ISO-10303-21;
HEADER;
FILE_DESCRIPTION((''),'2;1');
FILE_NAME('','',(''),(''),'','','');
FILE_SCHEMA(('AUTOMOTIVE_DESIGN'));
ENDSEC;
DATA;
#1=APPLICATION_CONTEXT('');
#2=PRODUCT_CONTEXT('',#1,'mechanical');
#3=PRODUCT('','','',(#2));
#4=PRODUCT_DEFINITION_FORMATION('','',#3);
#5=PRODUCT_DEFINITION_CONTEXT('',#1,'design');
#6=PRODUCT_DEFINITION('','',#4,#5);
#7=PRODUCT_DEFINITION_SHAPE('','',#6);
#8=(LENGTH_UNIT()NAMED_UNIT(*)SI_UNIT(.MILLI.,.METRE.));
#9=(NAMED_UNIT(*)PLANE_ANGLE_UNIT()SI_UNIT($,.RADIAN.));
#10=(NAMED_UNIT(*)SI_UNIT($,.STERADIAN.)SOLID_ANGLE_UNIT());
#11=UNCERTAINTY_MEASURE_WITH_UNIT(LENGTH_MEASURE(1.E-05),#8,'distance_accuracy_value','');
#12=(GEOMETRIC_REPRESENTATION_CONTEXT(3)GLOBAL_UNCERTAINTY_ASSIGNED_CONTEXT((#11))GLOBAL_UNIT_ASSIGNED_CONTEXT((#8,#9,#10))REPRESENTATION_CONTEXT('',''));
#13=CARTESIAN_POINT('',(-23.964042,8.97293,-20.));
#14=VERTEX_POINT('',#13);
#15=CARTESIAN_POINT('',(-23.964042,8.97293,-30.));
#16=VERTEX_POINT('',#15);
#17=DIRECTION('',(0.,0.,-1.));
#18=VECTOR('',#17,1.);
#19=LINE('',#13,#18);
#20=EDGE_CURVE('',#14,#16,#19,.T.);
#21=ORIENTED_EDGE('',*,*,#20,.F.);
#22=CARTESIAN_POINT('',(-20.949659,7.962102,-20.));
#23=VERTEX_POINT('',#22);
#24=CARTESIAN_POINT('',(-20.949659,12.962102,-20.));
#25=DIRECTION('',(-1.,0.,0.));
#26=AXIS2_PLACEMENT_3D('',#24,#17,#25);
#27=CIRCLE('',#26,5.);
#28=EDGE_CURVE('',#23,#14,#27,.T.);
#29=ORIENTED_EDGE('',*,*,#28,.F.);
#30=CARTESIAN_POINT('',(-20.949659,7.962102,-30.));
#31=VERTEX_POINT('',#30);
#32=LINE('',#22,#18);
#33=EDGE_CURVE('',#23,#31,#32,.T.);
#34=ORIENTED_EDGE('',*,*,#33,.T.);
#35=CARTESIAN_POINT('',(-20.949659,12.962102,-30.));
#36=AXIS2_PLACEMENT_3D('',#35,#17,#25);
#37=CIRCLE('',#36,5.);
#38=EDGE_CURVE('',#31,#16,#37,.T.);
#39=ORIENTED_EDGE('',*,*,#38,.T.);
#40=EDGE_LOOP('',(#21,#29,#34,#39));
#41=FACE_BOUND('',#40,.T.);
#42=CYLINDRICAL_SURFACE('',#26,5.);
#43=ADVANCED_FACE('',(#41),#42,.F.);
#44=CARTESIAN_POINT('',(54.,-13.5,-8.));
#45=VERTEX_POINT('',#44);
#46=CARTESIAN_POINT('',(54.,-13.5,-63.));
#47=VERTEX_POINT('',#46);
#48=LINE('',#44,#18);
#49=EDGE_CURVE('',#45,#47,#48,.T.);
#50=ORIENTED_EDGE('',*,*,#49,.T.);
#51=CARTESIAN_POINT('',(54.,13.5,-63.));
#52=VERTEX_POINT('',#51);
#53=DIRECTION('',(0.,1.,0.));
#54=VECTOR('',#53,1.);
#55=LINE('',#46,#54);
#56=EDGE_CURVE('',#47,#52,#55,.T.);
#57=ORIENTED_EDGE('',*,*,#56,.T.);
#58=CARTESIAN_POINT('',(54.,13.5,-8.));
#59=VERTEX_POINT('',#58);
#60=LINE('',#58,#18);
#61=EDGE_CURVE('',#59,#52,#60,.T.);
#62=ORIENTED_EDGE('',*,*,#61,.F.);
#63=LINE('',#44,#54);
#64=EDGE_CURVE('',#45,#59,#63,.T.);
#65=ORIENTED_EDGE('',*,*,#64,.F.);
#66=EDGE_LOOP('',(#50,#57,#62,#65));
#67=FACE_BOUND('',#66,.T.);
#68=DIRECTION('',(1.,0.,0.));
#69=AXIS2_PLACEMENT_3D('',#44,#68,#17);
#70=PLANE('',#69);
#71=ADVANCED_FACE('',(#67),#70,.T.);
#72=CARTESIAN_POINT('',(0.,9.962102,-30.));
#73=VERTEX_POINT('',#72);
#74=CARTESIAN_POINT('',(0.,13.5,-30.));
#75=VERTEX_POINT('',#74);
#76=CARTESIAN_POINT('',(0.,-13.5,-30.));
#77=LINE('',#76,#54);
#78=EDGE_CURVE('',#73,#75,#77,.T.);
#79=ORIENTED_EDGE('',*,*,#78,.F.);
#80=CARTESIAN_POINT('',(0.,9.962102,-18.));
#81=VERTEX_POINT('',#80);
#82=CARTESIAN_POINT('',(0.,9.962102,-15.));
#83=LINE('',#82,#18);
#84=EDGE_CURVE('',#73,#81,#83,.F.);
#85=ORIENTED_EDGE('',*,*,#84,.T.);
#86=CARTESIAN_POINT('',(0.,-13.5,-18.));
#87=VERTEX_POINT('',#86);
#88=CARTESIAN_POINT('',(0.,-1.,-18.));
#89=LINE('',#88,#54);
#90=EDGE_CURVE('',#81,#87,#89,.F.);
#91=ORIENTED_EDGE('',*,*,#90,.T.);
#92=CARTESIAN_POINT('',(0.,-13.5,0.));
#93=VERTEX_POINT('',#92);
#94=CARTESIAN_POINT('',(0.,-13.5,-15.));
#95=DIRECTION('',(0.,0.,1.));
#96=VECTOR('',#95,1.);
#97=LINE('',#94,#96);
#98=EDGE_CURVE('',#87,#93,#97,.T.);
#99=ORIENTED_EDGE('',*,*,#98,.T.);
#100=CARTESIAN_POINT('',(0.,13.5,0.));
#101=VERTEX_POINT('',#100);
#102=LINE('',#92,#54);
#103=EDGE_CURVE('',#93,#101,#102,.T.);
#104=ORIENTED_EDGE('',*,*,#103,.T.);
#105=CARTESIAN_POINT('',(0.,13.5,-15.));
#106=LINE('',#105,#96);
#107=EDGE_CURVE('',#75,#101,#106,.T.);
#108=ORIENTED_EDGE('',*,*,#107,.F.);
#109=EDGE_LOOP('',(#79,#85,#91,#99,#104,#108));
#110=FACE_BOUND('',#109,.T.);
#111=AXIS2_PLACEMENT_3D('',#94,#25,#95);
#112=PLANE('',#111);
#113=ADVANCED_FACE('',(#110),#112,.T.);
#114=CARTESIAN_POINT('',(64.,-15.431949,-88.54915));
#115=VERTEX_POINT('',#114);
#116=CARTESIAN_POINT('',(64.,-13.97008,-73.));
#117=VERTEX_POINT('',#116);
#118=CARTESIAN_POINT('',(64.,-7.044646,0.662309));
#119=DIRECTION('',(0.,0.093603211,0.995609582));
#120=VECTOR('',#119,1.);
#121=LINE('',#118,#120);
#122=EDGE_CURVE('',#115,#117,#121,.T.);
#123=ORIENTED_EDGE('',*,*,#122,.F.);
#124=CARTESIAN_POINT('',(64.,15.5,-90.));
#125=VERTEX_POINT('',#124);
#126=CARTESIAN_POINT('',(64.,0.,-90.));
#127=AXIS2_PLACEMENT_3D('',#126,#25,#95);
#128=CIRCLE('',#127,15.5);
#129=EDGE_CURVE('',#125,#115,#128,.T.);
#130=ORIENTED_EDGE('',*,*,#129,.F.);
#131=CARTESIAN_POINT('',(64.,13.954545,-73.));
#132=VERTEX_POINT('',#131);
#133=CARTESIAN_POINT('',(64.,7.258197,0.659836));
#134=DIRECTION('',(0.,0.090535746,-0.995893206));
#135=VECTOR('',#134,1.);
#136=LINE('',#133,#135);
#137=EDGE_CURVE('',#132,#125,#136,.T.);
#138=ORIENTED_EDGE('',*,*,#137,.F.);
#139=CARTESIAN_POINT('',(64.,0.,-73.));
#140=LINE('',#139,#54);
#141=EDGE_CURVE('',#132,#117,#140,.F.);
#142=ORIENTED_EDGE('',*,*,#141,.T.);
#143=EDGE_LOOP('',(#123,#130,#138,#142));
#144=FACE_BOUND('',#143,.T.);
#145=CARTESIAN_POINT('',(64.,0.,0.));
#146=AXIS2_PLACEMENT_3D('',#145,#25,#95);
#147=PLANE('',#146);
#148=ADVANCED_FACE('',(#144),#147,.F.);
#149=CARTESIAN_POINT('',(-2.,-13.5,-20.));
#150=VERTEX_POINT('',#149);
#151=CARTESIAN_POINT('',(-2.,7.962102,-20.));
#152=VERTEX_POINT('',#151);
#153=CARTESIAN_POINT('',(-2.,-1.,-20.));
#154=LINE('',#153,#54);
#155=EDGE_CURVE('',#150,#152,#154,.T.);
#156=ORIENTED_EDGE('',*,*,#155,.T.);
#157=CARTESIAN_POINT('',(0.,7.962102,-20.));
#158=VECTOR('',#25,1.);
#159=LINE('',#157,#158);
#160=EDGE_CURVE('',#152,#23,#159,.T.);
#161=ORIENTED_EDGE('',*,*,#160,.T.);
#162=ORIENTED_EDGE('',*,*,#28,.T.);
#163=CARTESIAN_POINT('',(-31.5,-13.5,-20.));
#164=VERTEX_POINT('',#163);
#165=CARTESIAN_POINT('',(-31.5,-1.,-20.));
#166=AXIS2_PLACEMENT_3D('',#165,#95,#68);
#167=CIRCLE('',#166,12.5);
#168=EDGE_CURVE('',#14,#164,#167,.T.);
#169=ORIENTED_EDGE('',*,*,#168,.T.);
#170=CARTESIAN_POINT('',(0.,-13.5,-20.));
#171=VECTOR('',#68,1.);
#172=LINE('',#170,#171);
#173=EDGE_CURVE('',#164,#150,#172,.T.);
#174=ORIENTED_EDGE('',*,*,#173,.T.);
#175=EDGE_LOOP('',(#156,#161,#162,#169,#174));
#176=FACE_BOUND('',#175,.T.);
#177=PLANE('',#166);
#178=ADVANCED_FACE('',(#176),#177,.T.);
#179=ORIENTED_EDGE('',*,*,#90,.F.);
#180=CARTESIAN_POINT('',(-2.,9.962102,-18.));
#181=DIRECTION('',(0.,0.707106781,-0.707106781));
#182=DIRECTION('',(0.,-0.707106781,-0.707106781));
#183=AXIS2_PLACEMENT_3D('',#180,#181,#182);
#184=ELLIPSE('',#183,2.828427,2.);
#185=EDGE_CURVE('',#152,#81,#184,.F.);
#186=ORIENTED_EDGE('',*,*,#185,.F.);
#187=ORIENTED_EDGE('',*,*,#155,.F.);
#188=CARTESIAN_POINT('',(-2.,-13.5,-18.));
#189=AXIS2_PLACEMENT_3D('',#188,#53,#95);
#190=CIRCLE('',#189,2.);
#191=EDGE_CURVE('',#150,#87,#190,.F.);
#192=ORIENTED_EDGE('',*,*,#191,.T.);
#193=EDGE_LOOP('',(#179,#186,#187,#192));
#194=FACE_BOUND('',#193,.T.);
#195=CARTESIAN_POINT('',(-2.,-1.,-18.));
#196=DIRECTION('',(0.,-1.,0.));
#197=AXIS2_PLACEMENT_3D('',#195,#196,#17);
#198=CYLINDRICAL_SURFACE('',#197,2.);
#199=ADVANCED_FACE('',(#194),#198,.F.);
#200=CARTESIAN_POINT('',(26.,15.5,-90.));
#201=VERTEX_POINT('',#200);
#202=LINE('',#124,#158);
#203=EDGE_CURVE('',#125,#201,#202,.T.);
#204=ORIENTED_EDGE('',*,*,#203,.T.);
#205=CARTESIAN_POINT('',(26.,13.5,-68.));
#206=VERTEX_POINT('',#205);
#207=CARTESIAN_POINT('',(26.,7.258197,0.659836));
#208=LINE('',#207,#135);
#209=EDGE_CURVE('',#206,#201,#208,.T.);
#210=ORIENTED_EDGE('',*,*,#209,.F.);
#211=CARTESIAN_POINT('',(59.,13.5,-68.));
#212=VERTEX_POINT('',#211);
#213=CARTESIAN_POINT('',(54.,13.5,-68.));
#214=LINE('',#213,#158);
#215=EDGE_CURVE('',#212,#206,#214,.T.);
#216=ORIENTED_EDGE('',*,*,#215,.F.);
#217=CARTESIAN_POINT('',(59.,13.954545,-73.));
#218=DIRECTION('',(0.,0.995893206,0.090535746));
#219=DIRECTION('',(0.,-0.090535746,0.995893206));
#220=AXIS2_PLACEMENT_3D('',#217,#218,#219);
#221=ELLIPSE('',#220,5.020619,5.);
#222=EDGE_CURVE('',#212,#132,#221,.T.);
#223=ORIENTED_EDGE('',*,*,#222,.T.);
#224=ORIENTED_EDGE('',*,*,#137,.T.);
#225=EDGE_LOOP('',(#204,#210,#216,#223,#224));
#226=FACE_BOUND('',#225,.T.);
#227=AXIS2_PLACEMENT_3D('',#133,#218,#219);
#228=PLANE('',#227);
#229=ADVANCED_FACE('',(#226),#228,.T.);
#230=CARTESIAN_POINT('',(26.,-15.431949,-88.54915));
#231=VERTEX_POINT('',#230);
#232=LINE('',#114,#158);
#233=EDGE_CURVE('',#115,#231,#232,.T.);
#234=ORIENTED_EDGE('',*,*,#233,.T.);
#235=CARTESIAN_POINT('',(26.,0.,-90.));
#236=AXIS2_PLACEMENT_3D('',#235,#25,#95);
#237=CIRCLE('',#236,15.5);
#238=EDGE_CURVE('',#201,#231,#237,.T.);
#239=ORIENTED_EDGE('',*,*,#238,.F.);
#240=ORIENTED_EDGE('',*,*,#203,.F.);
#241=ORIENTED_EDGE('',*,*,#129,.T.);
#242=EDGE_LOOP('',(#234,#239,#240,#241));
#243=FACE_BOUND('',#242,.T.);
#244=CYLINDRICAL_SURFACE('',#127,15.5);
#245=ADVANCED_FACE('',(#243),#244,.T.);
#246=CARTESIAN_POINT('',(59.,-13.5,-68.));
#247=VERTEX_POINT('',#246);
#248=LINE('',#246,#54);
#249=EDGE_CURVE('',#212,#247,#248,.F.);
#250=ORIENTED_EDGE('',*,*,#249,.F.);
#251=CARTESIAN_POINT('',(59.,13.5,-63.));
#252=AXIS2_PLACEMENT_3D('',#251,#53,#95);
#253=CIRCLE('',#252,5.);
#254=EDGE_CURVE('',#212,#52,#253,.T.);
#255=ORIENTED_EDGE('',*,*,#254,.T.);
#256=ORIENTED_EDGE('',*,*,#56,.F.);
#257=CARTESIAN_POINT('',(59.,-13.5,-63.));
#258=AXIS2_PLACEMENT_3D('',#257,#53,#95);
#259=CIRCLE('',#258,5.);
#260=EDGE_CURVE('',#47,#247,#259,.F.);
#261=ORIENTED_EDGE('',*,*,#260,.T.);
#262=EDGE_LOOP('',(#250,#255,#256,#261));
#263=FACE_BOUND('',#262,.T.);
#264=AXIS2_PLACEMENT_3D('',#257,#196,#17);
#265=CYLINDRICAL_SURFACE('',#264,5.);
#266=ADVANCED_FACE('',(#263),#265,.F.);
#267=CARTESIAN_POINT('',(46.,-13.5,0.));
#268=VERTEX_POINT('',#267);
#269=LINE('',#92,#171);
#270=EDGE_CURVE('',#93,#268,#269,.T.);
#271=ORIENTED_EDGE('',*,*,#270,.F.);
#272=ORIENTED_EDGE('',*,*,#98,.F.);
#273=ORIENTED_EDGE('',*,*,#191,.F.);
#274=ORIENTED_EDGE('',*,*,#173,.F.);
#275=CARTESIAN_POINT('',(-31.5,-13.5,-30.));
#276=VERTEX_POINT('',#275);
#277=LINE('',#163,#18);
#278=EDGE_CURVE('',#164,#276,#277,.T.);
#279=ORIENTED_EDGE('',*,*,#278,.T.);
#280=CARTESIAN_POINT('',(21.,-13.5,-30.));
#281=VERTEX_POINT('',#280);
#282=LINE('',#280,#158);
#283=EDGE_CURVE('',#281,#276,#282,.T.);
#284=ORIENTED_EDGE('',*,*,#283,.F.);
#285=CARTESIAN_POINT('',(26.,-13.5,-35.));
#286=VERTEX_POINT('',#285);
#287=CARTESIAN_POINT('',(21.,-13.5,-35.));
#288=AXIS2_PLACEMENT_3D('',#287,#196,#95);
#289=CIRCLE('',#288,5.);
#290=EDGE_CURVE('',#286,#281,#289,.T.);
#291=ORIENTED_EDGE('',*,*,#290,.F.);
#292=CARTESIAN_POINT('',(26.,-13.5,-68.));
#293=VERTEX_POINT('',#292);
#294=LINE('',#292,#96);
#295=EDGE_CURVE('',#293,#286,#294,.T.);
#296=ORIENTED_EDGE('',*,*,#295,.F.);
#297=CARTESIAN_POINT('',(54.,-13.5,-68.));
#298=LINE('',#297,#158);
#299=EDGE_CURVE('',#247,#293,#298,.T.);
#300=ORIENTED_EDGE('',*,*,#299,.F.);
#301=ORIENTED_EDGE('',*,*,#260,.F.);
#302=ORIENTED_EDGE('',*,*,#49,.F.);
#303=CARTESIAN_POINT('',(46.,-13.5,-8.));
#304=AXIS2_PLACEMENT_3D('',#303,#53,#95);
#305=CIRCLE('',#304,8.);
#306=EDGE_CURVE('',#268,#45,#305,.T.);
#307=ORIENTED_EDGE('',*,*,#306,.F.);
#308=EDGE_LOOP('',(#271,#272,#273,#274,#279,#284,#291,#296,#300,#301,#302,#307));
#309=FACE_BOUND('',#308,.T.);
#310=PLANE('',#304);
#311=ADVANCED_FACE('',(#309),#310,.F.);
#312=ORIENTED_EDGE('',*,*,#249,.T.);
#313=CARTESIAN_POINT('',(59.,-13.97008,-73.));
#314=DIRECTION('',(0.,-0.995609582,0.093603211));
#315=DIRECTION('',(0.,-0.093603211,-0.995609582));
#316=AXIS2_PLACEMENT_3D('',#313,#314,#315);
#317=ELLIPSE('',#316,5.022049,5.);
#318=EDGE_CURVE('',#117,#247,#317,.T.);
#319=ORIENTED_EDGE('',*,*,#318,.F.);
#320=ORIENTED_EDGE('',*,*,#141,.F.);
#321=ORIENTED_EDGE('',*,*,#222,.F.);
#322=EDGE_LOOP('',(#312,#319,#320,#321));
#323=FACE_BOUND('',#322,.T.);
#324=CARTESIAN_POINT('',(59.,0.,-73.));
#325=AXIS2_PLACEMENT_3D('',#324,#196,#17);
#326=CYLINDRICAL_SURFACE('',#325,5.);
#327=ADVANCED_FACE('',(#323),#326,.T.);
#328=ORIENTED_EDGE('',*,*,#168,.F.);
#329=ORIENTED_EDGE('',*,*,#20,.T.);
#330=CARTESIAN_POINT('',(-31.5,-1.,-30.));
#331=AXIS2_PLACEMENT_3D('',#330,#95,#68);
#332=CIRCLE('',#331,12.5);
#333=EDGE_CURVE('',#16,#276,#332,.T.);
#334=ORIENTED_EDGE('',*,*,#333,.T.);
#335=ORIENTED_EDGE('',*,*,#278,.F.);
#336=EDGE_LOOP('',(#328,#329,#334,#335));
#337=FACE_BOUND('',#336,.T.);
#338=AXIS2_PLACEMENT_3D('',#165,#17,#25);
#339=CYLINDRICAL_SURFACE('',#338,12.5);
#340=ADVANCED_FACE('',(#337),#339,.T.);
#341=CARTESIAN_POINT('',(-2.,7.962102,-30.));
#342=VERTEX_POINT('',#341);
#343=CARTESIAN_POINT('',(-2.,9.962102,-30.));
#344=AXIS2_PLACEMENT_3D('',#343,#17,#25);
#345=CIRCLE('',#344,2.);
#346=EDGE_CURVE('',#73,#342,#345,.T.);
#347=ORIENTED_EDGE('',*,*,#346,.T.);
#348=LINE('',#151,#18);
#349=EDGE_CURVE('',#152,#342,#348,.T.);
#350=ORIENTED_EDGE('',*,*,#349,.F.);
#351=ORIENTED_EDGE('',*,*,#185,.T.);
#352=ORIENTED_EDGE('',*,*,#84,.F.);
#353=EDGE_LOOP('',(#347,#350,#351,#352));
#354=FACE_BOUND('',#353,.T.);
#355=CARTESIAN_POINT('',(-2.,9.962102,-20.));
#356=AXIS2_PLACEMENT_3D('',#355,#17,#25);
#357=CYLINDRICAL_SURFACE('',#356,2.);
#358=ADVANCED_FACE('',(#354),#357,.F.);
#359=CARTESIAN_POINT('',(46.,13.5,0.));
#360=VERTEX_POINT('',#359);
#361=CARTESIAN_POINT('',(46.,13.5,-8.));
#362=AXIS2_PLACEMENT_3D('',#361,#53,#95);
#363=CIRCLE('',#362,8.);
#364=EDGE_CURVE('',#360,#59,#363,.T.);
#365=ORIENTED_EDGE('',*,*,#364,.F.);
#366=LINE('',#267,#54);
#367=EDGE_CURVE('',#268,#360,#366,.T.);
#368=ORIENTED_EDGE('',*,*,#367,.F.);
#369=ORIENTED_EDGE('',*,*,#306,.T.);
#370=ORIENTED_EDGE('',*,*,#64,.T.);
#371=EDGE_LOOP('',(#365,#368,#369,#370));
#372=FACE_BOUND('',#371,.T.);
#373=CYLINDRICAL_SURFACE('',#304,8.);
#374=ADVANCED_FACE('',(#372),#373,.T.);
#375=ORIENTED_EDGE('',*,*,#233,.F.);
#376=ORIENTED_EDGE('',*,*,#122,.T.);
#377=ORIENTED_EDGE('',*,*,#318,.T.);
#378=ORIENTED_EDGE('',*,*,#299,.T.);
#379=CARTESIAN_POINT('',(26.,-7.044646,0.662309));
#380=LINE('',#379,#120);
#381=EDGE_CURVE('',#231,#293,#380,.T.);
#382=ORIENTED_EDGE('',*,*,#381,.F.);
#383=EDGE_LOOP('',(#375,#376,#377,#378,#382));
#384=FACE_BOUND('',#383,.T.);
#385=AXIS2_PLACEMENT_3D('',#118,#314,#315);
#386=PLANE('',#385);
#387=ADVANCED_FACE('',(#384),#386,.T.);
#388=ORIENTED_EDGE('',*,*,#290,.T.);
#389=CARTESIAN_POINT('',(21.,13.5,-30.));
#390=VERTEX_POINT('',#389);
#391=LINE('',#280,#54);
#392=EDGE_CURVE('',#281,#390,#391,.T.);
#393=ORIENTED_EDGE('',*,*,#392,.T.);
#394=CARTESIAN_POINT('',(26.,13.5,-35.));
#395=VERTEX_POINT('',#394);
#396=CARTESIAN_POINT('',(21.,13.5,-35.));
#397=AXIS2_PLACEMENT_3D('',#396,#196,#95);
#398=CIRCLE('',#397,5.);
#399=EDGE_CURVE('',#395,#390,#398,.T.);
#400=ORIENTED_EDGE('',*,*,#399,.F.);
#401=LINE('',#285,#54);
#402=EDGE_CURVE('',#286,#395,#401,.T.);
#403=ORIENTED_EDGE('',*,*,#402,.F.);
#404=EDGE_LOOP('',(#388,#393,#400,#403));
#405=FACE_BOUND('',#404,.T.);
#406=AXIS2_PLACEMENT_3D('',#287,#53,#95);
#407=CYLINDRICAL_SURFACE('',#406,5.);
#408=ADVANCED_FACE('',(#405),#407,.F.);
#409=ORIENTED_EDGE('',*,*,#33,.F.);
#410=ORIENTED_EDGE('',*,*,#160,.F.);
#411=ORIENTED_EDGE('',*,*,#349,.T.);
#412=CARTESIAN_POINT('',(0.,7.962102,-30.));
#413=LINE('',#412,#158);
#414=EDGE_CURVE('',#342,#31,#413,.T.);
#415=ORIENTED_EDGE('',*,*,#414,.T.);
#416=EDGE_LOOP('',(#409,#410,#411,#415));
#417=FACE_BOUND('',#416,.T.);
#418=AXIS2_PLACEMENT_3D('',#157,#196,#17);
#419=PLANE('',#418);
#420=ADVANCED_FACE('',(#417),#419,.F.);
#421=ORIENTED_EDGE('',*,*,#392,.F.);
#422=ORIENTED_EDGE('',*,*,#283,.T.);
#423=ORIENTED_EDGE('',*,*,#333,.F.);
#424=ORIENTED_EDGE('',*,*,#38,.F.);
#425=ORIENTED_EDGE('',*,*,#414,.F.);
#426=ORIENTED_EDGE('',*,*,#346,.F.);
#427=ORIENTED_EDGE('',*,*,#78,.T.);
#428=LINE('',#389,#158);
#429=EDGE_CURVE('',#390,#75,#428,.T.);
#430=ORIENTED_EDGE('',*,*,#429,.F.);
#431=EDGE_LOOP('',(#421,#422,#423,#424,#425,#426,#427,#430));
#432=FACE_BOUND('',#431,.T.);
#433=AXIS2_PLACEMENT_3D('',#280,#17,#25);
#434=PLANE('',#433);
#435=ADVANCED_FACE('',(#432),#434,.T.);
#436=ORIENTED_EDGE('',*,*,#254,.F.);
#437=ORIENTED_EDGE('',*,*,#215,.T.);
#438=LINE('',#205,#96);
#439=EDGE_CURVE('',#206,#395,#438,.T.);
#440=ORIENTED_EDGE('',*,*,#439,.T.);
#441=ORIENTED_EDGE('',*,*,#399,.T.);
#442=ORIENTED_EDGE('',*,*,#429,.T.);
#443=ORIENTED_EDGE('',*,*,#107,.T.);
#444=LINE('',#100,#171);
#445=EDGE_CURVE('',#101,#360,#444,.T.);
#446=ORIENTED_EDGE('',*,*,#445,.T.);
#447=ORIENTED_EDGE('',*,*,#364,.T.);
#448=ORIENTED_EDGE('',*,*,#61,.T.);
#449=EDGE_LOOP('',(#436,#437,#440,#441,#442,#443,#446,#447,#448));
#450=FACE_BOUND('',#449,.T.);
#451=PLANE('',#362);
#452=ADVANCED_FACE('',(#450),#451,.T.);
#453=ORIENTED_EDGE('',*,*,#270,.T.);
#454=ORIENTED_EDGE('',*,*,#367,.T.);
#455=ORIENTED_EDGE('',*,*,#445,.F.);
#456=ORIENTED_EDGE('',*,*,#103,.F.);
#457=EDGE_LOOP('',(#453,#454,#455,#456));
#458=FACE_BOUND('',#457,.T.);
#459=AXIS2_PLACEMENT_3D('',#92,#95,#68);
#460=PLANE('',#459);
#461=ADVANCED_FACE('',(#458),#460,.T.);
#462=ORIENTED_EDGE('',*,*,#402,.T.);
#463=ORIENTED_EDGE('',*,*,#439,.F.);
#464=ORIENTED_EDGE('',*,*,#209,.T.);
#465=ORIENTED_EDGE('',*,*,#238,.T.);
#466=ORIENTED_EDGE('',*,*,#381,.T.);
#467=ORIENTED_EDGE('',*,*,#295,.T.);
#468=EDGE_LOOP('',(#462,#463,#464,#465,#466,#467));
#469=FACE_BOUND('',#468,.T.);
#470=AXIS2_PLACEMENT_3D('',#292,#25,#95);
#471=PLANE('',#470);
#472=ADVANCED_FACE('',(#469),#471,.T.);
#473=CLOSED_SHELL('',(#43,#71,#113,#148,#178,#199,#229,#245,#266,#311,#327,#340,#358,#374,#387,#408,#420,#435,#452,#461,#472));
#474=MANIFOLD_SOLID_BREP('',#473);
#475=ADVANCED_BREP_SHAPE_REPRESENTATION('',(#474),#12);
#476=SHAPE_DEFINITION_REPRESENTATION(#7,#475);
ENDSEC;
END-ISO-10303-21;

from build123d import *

# Parameters (mm, degrees)
BOSS_EXTRUDE1_DEPTH      = 13.5
BOSS_EXTRUDE1_DEPTH_BACK = 13.5
BOSS_EXTRUDE2_START      = -30
BOSS_EXTRUDE2_DEPTH      = 10
FILLET3_R                = 2
BOSS_EXTRUDE3_DEPTH      = 38
FILLET4_R                = 5
FILLET5_R                = 5


with BuildPart() as part:
    # Sketch1 → Boss-Extrude1 (new, two sides: drawn at the far end of the back side and taken through both)
    with BuildSketch(Plane(origin=(0, 0, 0), x_dir=(1, 0, 0), z_dir=(0, 1, 0)).offset(-BOSS_EXTRUDE1_DEPTH_BACK)):
        with BuildLine():
            Line((0, 0), (46, 0))
            ThreePointArc((46, 0), (51.656854249, 2.343145751), (54, 8))
            Line((54, 8), (54, 68))
            Line((54, 68), (26, 68))
            Line((26, 68), (26, 35))
            ThreePointArc((26, 35), (24.535533906, 31.464466094), (21, 30))
            Line((21, 30), (0, 30))
            Line((0, 30), (0, 15))
            Line((0, 15), (0, 0))
        make_face()
    extrude(amount=BOSS_EXTRUDE1_DEPTH + BOSS_EXTRUDE1_DEPTH_BACK)

    # Sketch2 → Boss-Extrude2 (add)
    with BuildSketch(Plane.XY.offset(BOSS_EXTRUDE2_START)):
        with BuildLine():
            Line((0, -13.5), (-31.5, -13.5))
            ThreePointArc((-31.5, -13.5), (-43.351405537, 2.974190082), (-23.964041865, 8.972930111))
            ThreePointArc((-23.964041865, 8.972930111), (-22.539334644, 8.22153994), (-20.949658611, 7.962102155))
            Line((-20.949658611, 7.962102155), (0, 7.962102155))
            Line((0, 7.962102155), (0, -13.5))
        make_face()
    extrude(amount=BOSS_EXTRUDE2_DEPTH)

    # Fillet3
    fillet3_edges = [part.edges().sort_by_distance(p)[0] for p in [
        (0, 7.962102155, -25),
        (0, -2.768948923, -20),
    ]]
    fillet(fillet3_edges, radius=FILLET3_R)

    # Sketch4 → Boss-Extrude3 (add)
    with BuildSketch(Plane.ZY.offset(-26)):
        with BuildLine():
            ThreePointArc((-90, 15.5), (-105.482977781, -0.726222431), (-88.549150224, -15.431948514))
            Line((-88.549150224, -15.431948514), (-68, -13.5))
            Line((-68, -13.5), (-68, 13.5))
            Line((-68, 13.5), (-87.204918033, 15.245901639))
            Line((-87.204918033, 15.245901639), (-90, 15.5))
        make_face()
    extrude(amount=-BOSS_EXTRUDE3_DEPTH)

    # Fillet4
    fillet4_edges = [part.edges().sort_by_distance(p)[0] for p in [
        (54, 0, -68),
    ]]
    fillet(fillet4_edges, radius=FILLET4_R)

    # Fillet5
    fillet5_edges = [part.edges().sort_by_distance(p)[0] for p in [
        (64, 0, -68),
    ]]
    fillet(fillet5_edges, radius=FILLET5_R - 0.0001)  # a hair under: the kernel refuses the full size


solid = part.part
